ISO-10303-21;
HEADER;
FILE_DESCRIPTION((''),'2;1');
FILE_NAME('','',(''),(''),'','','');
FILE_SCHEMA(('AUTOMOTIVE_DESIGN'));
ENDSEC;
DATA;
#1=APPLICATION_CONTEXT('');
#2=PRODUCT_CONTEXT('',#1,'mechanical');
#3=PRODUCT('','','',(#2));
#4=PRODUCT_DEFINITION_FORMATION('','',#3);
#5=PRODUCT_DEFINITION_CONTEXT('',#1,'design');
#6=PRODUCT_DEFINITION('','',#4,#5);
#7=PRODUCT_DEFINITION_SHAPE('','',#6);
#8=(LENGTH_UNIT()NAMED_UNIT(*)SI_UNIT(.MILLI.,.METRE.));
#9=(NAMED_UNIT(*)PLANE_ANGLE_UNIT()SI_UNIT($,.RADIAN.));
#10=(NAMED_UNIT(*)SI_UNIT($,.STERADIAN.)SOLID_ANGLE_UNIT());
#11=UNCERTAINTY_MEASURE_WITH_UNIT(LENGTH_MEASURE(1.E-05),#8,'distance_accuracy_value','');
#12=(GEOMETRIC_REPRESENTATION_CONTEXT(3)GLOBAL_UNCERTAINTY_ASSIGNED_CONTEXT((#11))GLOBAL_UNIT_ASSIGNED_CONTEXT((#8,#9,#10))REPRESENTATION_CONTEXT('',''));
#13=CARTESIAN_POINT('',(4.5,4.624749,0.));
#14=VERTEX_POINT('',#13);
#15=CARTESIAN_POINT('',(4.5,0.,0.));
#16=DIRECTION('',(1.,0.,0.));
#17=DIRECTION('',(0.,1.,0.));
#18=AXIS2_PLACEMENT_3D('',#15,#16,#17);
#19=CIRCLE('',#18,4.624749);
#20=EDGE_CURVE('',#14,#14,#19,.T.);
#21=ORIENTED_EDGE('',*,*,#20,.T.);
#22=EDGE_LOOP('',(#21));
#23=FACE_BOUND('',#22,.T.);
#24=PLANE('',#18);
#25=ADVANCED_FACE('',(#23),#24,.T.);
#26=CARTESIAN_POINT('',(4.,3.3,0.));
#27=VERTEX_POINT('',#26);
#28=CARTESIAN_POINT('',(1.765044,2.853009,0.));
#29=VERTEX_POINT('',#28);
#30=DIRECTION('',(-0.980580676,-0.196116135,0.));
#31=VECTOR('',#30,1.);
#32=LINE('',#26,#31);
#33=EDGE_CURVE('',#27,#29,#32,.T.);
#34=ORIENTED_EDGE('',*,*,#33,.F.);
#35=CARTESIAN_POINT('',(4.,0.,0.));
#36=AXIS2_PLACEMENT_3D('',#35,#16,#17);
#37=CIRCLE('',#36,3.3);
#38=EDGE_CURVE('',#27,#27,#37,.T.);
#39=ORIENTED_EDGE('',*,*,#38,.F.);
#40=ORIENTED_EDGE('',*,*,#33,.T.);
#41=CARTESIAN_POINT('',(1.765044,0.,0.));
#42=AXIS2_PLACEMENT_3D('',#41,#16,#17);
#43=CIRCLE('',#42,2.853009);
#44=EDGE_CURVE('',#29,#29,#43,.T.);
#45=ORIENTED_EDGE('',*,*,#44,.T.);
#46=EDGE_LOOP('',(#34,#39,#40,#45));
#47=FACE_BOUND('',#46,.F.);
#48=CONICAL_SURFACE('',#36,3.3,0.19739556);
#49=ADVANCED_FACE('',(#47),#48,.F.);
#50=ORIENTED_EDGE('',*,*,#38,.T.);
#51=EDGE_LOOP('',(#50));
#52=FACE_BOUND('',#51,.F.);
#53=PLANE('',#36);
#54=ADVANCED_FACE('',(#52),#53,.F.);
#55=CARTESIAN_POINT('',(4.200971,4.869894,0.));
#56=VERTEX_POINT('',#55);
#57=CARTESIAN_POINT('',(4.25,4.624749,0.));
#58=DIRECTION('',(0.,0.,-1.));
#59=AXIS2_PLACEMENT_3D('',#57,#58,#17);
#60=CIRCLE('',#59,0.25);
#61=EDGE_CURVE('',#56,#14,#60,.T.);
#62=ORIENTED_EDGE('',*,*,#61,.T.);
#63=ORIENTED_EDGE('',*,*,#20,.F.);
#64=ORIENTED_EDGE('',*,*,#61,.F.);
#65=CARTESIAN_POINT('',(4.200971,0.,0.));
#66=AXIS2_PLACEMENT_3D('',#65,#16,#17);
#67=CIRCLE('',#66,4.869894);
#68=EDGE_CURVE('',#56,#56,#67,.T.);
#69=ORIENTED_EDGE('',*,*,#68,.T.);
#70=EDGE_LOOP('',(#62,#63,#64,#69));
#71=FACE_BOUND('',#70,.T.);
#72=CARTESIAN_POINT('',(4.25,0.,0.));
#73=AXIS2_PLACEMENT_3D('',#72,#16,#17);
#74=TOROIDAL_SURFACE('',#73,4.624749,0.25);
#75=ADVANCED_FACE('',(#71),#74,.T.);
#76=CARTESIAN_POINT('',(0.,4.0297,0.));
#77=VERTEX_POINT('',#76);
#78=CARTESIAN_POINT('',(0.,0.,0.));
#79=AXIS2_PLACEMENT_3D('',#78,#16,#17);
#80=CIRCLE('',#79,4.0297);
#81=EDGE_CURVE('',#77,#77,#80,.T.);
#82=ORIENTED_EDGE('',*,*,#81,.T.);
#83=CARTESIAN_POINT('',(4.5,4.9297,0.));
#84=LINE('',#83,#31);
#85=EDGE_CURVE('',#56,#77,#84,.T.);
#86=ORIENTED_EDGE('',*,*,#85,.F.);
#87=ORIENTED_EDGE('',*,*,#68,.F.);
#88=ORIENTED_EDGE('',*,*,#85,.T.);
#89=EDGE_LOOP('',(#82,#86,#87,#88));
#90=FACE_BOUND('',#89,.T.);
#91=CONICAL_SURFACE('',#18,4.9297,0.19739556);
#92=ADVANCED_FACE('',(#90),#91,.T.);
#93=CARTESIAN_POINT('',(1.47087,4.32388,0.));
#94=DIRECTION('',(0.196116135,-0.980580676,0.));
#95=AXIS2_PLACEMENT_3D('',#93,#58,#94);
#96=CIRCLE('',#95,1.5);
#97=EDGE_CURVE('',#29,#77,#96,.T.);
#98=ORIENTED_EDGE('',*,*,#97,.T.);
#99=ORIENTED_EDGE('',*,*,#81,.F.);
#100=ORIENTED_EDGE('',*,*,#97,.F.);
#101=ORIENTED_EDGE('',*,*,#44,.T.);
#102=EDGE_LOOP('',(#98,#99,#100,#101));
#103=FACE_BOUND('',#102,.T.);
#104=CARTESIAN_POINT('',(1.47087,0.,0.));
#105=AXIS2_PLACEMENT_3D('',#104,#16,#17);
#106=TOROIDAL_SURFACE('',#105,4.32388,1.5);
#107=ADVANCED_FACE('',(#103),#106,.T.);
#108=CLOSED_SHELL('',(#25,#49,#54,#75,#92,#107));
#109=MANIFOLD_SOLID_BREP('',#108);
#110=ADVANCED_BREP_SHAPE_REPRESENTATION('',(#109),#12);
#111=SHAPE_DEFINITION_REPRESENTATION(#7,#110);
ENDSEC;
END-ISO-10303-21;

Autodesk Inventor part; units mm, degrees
sketch "Skizze1" plane through (0, 0, 0) normal (0, 0, 1) x (1, 0, 0)
  line L0 (4, 3.3) -> (0, 2.5)
  line L1 (4.5, 4.9297) -> (0, 4.0297)
  line L2 (0, 2.5) -> (0, 4.0297)
  line L3 (4.5, 4.9297) -> (4.5, 3.4)
  line L4 (-0.9, 0) -> (5.4, 0) projected
  line L5 (4.5, 3.4) -> (4.5, 0)
  line L6 (4, 3.3) -> (4, 0)
  line L7 (4, 0) -> (4.5, 0)
  point P0 (0, 0)
  dimension "d53" = 2.5
  dimension "d55" = 1.5
  dimension "d61" = 4.5
  dimension "d62" = 0.5
revolve "Umdrehung1" add sketch "Skizze1" angle 360 about axis through (-10, 0, 0) along (1, 0, 0)
fillet "Rundung8" radius 1.5 1 edges at (0, -2.5, 0)
fillet "Rundung9" radius 0.25 1 edges at (4.5, -4.9297, 0)
properties part number "ScheinwerferFront"
